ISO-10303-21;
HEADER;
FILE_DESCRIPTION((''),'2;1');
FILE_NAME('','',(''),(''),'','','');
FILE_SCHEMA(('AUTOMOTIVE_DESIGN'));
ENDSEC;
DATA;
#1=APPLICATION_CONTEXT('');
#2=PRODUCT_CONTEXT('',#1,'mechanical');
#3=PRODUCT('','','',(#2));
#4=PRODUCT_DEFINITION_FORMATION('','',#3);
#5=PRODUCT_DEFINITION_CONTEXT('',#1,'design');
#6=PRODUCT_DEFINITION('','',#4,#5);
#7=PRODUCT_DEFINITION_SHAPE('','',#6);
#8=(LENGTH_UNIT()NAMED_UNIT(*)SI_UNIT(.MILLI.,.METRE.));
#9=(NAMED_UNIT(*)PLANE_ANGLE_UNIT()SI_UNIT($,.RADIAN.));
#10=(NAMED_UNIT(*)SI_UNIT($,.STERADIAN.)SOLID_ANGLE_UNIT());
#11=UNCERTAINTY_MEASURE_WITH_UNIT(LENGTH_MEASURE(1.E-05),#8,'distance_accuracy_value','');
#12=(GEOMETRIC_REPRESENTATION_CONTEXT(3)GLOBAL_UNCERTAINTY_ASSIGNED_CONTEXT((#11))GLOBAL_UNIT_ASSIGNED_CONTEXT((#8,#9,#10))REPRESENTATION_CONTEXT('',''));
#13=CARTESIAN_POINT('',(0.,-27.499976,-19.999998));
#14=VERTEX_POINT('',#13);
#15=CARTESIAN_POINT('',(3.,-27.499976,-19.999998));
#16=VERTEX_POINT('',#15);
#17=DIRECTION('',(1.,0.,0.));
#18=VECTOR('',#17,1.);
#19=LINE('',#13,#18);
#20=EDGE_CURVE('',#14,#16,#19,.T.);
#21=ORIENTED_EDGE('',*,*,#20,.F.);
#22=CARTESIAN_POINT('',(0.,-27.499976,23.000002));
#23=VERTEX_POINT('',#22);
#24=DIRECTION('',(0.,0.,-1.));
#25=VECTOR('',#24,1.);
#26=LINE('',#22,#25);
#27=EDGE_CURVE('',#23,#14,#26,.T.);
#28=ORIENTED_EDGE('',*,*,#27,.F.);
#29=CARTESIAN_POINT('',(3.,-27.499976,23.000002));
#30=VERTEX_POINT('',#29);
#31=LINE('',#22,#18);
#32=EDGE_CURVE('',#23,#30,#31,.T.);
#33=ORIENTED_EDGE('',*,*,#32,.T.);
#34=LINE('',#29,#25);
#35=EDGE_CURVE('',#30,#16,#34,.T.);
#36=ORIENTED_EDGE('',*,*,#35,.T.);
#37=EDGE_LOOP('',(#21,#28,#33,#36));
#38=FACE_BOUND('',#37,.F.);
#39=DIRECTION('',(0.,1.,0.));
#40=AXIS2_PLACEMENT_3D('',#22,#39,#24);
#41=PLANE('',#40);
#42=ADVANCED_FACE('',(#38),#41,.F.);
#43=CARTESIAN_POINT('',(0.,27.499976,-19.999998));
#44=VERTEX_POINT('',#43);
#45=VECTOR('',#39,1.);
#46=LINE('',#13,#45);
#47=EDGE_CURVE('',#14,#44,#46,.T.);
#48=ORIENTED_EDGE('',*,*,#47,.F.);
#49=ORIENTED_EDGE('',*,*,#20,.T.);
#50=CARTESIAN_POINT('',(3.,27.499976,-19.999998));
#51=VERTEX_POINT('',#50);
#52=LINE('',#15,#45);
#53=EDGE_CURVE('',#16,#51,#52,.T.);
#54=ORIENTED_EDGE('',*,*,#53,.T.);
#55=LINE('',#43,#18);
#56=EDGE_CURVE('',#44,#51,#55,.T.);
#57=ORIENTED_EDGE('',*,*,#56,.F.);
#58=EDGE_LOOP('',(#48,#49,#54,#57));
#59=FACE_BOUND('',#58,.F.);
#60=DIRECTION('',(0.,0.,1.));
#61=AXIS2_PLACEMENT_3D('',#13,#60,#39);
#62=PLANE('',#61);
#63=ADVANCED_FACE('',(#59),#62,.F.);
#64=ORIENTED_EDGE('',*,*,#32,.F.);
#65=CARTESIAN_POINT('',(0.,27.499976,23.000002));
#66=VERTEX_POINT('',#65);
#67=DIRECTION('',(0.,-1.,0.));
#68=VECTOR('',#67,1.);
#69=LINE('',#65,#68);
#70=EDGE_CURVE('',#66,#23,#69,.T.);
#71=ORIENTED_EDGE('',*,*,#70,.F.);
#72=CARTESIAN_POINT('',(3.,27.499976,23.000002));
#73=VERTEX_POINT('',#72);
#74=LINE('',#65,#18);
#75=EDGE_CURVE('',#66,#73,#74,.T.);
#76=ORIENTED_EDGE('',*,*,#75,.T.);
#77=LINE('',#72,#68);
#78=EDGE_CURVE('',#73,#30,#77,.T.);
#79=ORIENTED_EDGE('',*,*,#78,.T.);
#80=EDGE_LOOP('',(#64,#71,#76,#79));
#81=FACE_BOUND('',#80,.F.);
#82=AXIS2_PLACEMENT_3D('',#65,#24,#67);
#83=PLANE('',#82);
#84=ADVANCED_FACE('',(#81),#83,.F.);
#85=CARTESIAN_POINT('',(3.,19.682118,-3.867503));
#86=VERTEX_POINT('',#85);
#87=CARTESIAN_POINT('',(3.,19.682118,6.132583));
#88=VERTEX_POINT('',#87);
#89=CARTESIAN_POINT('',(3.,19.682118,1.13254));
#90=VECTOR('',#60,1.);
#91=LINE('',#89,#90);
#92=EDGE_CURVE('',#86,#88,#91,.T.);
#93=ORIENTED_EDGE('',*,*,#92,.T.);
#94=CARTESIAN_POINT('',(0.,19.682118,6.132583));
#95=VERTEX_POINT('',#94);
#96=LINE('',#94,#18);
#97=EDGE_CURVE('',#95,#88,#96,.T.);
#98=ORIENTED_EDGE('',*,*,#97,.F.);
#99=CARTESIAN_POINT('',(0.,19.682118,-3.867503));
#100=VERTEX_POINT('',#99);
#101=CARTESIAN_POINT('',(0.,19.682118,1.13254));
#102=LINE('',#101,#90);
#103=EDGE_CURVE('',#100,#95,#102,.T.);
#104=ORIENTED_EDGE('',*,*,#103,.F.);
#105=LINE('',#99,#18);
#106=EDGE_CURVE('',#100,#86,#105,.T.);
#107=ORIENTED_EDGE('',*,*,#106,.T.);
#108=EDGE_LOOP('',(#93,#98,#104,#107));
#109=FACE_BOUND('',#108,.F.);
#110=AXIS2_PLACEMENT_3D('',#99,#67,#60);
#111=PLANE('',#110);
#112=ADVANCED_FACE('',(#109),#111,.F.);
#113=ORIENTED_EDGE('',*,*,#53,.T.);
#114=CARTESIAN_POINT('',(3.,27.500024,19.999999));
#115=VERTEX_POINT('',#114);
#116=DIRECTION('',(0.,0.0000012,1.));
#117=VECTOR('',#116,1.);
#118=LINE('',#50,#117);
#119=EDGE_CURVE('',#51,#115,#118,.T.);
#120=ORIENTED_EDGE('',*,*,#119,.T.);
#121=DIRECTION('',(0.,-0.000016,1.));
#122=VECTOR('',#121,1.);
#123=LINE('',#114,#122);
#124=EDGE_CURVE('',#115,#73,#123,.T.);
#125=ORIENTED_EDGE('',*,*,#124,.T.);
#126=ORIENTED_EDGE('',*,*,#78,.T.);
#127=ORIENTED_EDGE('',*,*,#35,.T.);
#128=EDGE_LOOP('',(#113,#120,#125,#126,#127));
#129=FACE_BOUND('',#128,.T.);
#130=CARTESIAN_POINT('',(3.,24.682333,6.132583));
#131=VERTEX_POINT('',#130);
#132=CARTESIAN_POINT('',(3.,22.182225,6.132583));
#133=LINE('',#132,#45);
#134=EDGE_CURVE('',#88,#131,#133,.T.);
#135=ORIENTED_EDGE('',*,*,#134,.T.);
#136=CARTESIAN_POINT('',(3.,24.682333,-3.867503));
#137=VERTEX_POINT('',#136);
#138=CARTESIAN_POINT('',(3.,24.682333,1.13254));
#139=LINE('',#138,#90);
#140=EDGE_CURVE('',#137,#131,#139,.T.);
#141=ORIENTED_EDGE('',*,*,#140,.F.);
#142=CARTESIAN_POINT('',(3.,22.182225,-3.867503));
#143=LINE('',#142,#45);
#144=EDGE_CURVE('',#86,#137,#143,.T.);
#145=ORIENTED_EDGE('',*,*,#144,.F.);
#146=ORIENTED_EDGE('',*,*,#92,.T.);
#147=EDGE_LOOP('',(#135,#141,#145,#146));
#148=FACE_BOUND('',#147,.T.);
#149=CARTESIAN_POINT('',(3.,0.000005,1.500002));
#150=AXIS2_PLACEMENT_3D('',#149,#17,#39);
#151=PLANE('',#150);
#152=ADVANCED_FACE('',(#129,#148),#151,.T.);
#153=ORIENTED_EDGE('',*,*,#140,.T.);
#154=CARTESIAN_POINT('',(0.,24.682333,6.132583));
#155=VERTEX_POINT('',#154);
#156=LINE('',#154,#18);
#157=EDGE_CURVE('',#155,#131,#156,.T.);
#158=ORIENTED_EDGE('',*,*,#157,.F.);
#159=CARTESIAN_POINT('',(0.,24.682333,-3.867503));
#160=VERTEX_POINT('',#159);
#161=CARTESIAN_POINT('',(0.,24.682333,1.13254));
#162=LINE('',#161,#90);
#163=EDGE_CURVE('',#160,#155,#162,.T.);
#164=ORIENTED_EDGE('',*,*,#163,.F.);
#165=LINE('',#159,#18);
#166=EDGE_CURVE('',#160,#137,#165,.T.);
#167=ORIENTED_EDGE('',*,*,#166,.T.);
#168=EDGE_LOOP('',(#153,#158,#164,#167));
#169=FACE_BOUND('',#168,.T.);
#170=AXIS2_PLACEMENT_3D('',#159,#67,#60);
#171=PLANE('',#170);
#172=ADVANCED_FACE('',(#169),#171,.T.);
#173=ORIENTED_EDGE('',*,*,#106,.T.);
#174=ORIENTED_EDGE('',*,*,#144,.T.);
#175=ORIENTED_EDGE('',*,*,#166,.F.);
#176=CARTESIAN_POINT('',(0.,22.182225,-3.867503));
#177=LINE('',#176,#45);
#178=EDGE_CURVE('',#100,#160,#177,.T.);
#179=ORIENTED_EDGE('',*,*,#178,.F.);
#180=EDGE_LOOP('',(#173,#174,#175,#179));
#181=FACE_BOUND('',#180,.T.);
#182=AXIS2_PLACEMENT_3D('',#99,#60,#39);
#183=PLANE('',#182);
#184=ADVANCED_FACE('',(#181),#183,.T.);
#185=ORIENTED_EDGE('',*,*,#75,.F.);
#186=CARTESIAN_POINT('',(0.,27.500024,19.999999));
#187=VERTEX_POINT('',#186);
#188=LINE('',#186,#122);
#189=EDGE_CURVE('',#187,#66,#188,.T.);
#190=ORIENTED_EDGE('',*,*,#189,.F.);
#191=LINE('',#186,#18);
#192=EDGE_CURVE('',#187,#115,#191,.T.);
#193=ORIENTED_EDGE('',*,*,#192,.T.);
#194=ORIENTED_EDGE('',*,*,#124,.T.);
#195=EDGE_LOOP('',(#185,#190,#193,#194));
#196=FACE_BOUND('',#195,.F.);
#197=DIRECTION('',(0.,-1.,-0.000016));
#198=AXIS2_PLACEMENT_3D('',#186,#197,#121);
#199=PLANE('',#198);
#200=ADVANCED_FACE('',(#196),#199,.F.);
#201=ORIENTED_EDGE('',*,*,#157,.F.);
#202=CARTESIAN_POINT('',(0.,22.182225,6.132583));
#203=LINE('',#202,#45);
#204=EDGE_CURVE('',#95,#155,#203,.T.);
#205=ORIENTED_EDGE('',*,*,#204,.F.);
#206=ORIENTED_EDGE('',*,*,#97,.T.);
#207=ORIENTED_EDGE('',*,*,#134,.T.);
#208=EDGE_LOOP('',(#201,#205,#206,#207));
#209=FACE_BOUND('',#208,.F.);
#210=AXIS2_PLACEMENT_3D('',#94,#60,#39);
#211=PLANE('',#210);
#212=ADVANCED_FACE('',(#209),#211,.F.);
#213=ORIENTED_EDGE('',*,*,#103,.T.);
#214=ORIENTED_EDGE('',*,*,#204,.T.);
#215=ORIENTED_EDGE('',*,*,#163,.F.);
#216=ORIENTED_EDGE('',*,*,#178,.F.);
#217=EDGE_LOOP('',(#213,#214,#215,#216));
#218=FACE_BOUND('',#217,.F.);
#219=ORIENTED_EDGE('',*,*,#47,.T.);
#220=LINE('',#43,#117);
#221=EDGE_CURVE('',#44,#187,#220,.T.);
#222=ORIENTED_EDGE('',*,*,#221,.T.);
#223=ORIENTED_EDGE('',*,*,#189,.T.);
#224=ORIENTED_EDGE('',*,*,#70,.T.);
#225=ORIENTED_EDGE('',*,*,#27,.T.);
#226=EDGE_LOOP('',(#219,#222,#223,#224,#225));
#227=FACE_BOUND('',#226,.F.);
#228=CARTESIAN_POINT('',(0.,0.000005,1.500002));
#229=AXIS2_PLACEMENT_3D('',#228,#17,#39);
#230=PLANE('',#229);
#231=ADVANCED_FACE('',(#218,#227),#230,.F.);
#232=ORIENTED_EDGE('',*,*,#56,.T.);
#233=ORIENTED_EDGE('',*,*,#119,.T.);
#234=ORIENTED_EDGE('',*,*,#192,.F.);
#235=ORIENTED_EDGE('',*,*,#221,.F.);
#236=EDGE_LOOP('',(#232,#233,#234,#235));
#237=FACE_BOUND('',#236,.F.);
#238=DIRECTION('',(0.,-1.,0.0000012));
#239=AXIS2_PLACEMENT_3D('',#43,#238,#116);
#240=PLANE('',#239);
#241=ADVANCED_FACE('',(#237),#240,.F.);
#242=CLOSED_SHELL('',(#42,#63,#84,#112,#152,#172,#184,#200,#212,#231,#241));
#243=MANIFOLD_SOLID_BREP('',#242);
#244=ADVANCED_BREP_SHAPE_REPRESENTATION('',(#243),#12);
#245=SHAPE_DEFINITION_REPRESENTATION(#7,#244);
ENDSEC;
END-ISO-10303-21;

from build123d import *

# Parameters (mm, degrees)
F0_W     = 5.000215
F0_H     = 10.000086
F1_DEPTH = 3


# Not quite as in the source:
# - ends of sketch curves that miss each other by under 0.0002 mm in the source are joined


with BuildPart() as f1:
    # F0 (on Right) → F1 (new body)
    with BuildSketch(Plane.YZ):
        Polygon((-27.499976, 19.999999), (-27.499976, -19.999998), (27.499976, -19.999998), (27.500024, 19.999999), (27.499976, 23.000002), (-27.499976, 23.000002), align=None)
        with Locations((22.1822251524, 1.1325399325)):
            Rectangle(F0_W, F0_H, mode=Mode.SUBTRACT)
    extrude(amount=F1_DEPTH)


solid = f1.part
